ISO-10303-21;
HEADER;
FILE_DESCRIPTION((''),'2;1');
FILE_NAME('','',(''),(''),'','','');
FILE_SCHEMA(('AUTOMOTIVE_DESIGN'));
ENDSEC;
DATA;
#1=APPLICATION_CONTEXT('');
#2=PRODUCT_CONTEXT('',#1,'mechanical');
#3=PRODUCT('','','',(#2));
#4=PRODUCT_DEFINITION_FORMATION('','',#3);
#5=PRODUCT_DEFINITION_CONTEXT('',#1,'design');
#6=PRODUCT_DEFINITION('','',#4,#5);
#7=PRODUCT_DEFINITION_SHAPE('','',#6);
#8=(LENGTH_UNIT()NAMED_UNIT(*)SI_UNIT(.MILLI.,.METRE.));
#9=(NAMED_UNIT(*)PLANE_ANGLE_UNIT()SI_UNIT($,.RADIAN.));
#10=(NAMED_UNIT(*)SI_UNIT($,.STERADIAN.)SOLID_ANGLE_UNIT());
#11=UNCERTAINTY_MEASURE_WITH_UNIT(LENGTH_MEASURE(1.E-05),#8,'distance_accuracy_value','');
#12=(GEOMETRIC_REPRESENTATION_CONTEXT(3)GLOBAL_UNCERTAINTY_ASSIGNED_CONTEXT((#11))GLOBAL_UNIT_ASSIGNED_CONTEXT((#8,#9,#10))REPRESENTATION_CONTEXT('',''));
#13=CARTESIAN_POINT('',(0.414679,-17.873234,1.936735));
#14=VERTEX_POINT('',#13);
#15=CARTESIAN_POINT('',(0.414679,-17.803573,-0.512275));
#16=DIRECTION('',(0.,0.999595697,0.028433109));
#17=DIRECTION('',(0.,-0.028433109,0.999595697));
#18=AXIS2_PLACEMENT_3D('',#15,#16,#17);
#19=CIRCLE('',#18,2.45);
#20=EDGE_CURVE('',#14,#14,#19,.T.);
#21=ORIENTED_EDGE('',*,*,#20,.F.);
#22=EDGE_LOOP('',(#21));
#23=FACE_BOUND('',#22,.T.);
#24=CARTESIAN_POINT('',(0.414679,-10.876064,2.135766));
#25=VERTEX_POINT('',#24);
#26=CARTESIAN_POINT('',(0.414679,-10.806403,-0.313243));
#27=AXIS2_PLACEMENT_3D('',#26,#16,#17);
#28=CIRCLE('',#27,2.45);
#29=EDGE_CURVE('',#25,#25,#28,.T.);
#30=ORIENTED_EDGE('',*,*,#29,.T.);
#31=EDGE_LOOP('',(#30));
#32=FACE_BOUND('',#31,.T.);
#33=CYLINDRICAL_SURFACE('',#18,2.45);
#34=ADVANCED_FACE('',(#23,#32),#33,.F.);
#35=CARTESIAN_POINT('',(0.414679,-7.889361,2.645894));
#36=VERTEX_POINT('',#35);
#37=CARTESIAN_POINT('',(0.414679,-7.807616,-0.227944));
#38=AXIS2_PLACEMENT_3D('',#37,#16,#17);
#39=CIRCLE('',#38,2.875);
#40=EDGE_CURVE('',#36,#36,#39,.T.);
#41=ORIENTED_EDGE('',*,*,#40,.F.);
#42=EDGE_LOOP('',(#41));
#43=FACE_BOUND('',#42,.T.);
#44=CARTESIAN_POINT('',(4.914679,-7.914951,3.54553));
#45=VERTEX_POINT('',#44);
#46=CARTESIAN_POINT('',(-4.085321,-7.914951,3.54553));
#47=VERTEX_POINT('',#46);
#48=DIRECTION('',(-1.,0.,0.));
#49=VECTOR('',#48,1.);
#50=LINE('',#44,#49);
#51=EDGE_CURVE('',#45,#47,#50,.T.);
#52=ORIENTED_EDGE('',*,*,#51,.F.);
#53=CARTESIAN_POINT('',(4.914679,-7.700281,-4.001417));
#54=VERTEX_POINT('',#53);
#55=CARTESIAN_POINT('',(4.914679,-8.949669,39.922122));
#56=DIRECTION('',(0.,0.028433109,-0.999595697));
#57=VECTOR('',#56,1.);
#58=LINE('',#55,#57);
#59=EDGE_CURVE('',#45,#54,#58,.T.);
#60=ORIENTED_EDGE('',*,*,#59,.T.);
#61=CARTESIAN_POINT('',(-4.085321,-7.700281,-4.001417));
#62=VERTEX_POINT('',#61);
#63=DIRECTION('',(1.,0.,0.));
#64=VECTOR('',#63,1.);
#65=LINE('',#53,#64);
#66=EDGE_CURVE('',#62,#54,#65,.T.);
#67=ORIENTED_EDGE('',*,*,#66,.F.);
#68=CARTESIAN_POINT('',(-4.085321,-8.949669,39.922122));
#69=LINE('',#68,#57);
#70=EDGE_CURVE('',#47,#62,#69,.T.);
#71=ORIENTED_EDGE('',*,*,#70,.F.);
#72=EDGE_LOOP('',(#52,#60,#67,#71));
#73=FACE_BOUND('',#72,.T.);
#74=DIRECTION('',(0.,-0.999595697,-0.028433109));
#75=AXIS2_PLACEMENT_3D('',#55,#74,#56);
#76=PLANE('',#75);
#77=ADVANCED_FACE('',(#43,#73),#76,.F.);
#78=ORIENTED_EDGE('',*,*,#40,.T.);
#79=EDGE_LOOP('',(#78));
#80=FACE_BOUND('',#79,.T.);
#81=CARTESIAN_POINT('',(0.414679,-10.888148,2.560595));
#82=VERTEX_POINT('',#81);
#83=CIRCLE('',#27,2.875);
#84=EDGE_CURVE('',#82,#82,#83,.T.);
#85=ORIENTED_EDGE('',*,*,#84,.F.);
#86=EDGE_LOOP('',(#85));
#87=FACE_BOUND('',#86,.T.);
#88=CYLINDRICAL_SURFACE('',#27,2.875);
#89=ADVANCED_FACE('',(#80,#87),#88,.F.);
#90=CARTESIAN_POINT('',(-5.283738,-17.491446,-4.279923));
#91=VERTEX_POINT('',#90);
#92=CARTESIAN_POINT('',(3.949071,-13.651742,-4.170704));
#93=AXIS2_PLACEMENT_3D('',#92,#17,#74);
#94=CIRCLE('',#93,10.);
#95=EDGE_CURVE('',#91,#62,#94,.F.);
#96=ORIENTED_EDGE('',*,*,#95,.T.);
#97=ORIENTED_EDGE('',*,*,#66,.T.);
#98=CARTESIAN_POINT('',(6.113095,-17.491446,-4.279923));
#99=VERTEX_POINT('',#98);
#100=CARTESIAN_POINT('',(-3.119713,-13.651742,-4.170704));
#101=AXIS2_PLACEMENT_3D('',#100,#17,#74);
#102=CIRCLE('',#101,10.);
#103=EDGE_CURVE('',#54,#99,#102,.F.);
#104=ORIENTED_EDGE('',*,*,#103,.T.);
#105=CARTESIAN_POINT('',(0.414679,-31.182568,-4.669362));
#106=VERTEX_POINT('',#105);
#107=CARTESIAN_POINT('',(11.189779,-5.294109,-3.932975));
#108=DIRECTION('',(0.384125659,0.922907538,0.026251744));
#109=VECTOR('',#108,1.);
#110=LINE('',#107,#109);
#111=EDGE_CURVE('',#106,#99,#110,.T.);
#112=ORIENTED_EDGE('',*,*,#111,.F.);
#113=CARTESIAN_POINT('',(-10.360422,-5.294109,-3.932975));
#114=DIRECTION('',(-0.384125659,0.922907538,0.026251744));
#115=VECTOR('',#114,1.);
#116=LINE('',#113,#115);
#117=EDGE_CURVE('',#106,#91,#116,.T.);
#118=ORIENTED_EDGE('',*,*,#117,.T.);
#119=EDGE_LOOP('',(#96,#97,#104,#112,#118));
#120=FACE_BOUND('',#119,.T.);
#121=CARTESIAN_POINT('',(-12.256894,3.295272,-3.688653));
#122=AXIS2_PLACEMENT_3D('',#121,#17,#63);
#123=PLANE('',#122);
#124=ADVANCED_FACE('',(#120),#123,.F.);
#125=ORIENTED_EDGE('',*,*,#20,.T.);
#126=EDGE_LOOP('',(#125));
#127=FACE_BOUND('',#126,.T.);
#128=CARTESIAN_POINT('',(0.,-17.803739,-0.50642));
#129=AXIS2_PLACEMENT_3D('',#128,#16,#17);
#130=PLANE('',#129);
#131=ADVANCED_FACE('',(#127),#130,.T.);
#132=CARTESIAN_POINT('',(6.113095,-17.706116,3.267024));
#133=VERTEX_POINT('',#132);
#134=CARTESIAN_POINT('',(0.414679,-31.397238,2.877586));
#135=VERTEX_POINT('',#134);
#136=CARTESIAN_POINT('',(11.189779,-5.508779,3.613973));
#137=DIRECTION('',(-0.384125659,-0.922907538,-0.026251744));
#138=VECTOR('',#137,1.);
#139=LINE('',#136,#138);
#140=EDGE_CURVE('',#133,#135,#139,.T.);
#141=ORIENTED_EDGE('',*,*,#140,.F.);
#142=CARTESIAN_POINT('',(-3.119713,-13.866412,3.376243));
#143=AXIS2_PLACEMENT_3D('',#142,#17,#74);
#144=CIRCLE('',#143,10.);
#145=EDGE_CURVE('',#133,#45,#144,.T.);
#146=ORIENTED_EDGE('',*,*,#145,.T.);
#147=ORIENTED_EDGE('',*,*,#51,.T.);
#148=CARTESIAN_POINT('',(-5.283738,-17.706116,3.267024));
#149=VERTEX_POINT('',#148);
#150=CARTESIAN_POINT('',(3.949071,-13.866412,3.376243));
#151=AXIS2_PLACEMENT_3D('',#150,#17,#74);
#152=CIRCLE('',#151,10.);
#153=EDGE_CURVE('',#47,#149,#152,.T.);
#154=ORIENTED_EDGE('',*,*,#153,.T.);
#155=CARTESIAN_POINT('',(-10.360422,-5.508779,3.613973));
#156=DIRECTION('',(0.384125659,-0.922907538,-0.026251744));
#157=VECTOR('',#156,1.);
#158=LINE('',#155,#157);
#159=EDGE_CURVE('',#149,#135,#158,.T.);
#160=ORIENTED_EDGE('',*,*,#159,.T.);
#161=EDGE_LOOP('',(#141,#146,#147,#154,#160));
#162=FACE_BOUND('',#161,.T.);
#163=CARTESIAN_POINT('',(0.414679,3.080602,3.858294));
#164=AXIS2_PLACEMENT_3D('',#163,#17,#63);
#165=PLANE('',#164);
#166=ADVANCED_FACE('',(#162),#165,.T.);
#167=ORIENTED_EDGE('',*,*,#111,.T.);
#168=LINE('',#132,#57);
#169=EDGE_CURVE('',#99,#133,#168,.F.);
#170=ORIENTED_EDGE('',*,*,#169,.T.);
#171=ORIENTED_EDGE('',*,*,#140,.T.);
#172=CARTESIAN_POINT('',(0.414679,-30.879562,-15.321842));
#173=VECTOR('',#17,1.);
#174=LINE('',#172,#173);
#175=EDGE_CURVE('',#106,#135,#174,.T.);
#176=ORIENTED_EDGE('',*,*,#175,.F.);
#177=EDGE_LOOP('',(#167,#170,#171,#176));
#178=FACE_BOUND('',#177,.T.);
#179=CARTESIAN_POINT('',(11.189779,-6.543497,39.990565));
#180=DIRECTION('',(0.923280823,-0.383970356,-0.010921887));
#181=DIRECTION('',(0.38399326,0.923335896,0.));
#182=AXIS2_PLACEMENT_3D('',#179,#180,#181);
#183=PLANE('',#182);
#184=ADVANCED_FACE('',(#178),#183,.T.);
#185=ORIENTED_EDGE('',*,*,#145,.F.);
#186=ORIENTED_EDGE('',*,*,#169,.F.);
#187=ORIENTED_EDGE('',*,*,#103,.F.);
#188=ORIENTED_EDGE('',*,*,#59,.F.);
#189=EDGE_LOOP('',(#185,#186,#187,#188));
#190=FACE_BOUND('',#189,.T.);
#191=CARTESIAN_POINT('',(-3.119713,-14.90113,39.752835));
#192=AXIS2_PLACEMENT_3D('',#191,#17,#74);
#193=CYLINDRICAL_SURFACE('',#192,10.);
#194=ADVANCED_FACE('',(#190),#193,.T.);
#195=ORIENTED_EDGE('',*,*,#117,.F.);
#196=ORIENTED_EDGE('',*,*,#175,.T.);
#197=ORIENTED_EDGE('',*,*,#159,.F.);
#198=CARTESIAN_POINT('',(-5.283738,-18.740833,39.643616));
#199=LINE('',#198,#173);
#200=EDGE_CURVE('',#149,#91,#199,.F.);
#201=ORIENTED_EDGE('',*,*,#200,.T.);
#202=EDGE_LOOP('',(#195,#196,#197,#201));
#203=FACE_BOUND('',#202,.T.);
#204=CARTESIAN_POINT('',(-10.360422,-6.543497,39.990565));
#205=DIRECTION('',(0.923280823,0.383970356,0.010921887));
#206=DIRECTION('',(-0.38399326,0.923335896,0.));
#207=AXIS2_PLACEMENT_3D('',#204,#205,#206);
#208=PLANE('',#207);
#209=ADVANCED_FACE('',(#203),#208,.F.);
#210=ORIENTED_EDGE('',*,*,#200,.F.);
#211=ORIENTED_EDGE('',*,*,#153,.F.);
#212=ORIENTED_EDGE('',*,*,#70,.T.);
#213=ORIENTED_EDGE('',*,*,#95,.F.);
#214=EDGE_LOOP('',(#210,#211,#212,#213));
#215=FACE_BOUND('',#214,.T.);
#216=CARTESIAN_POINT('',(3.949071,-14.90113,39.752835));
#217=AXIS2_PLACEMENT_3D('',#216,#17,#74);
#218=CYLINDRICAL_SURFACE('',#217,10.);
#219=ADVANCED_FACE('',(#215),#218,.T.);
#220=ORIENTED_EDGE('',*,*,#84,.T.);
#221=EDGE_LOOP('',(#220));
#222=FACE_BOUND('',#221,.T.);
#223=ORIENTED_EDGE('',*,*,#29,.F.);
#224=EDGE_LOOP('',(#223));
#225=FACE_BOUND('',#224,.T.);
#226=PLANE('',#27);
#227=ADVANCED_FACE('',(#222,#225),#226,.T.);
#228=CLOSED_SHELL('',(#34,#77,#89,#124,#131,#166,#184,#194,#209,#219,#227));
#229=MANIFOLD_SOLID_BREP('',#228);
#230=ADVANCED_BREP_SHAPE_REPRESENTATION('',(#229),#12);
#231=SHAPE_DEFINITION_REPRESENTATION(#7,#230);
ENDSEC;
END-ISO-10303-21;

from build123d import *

# Parameters (mm, degrees)
BOSS_EXTRUDE1_DEPTH      = 4.35
BOSS_EXTRUDE1_DEPTH_BACK = 3.2
SKETCH4_R                = 2.45
CUT_EXTRUDE2_DEPTH       = 10
SKETCH4_5_R              = 2.875
SKETCH4_5_R_2            = 2.45
CUT_EXTRUDE3_DEPTH       = 3
FILLET1_R                = 10
BOSS_EXTRUDE2_DEPTH      = 7.55


with BuildPart() as part:
    # Sketch2 → Boss-Extrude1 (new, two sides: drawn at the far end of the back side and taken through both)
    with BuildSketch(Plane(origin=(0, 0.021487422, -0.580480419), x_dir=(1, 0, 0), z_dir=(0, -0.02843310858496513, 0.9995956974378171)).offset(-BOSS_EXTRUDE1_DEPTH_BACK)):
        Polygon((-13.116179094, 1.214943373), (-10.360421829, -5.408768885), (-2.99346614, -23.115914326), (3.822823349, -23.115914326), (11.189779038, -5.408768885), (13.945536303, 1.214943373), (9.430107454, -3.300485476), (4.914678604, -7.815914326), (-4.085321396, -7.815914326), (-8.600750245, -3.300485476), align=None)
    extrude(amount=BOSS_EXTRUDE1_DEPTH + BOSS_EXTRUDE1_DEPTH_BACK)

    # Sketch4 → Cut-Extrude2 (cut)
    with BuildSketch(Plane(origin=(0, -7.80778247, -0.222089318), x_dir=(1, 0, 0), z_dir=(0, 0.9995956974378171, 0.02843310858496514))):
        with Locations(Location((0.414678604, 0.005856684, 0), (0, 0, 270))):
            Circle(SKETCH4_R)
    extrude(amount=-CUT_EXTRUDE2_DEPTH, mode=Mode.SUBTRACT)

    # Sketch4<5> → Cut-Extrude3 (cut)
    with BuildSketch(Plane(origin=(0, -7.80778247, -0.222089318), x_dir=(1, 0, 0), z_dir=(0, 0.9995956974378171, 0.02843310858496514))):
        with Locations(Location((0.414678604, 0.005856684, 0), (0, 0, 270))):
            Circle(SKETCH4_5_R)
        with Locations(Location((0.414678604, 0.005856684, 0), (0, 0, 270))):
            Circle(SKETCH4_5_R_2, mode=Mode.SUBTRACT)
    extrude(amount=-CUT_EXTRUDE3_DEPTH, mode=Mode.SUBTRACT)

    # Fillet1
    # the kernel refuses this fillet: 10 mm, written as the material it takes off along each edge
    with BuildSketch(Plane(origin=(13.945536303, -0.3371442, 54.757471627), x_dir=(-0.7071067811865475, -0.7068208961031768, -0.020105243890642274), z_dir=(0, 0.028433108584965117, -0.999595697437817)), Plane(origin=(-13.116179094, 2.776325306, -54.69980818), x_dir=(0.7071067811865489, -0.7068208961031754, -0.020105243890642235), z_dir=(0, -0.028433108584965117, 0.999595697437817))) as fillet1_piece_1:
        with BuildLine():
            CenterArc((22.662755022, 1.47115243), FILLET1_R, 188.459787479, 59.129683347)
            Line((18.850352296, -7.773607462), (0, 0))
            Line((0, 0), (12.771561437, 0))
        make_face()
    extrude(amount=109.501551565, mode=Mode.SUBTRACT)

    # Sketch6 → Boss-Extrude2 (add)
    with BuildSketch(Plane(origin=(0, -0.107168461, 3.767619442), x_dir=(1, 0, 0), z_dir=(0, -0.02843310858496513, 0.9995956974378171))):
        Polygon((-2.99346614, -23.110940453), (0.414678604, -31.302725123), (3.822823349, -23.110940453), align=None)
    extrude(amount=-BOSS_EXTRUDE2_DEPTH)


solid = part.part
